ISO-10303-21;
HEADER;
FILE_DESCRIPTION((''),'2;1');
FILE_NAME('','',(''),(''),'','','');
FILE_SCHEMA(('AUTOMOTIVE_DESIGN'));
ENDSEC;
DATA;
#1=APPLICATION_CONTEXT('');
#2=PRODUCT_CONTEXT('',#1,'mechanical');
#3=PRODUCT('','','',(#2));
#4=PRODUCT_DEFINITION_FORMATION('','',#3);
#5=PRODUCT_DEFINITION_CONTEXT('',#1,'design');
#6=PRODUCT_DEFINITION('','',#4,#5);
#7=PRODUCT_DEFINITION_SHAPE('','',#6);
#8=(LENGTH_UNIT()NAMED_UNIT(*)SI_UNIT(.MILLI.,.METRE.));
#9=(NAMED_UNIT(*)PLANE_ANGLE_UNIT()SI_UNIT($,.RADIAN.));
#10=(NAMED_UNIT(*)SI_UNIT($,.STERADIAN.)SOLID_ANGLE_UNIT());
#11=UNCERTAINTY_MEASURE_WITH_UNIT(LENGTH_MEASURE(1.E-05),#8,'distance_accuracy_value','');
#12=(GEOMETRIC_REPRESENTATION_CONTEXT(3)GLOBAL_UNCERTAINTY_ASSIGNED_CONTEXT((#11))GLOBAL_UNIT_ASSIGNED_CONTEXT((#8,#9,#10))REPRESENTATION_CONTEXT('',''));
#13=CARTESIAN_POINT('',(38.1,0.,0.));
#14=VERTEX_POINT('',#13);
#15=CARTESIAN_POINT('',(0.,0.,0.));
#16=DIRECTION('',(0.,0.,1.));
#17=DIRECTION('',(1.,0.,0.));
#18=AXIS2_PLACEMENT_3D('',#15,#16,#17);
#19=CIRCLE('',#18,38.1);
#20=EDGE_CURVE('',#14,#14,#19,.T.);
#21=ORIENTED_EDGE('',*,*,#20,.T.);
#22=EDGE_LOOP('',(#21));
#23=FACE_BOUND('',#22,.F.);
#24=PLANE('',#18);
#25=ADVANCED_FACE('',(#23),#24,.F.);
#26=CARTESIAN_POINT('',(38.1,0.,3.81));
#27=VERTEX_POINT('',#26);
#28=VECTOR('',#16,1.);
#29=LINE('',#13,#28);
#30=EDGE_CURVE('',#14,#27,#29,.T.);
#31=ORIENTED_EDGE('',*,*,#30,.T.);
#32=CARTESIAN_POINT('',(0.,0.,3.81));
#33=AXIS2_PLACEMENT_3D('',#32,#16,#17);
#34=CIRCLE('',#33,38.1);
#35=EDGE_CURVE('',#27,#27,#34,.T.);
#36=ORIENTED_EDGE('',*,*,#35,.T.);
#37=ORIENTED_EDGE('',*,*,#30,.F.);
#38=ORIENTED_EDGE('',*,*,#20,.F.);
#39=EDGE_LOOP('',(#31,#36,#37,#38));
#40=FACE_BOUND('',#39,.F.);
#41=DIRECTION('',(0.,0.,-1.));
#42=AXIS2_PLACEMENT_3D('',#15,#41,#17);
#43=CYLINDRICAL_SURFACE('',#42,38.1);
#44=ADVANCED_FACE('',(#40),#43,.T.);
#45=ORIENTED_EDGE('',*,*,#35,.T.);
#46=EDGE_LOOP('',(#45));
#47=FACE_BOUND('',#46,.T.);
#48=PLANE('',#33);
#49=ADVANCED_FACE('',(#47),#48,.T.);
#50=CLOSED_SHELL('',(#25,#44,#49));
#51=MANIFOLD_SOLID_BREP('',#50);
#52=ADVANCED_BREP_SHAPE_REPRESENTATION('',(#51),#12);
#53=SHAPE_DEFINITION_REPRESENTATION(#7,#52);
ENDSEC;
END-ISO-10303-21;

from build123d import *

# Parameters (mm, degrees)
F0_R     = 38.1
F1_DEPTH = 3.81


# Not quite as in the source:
# - a feature names something its author has since deleted; it is built from what else it names


with BuildPart() as f1:
    # F0 (on Top) → F1 (new body)
    with BuildSketch(Plane.XY):
        Circle(F0_R)
    extrude(amount=F1_DEPTH)


solid = f1.part
